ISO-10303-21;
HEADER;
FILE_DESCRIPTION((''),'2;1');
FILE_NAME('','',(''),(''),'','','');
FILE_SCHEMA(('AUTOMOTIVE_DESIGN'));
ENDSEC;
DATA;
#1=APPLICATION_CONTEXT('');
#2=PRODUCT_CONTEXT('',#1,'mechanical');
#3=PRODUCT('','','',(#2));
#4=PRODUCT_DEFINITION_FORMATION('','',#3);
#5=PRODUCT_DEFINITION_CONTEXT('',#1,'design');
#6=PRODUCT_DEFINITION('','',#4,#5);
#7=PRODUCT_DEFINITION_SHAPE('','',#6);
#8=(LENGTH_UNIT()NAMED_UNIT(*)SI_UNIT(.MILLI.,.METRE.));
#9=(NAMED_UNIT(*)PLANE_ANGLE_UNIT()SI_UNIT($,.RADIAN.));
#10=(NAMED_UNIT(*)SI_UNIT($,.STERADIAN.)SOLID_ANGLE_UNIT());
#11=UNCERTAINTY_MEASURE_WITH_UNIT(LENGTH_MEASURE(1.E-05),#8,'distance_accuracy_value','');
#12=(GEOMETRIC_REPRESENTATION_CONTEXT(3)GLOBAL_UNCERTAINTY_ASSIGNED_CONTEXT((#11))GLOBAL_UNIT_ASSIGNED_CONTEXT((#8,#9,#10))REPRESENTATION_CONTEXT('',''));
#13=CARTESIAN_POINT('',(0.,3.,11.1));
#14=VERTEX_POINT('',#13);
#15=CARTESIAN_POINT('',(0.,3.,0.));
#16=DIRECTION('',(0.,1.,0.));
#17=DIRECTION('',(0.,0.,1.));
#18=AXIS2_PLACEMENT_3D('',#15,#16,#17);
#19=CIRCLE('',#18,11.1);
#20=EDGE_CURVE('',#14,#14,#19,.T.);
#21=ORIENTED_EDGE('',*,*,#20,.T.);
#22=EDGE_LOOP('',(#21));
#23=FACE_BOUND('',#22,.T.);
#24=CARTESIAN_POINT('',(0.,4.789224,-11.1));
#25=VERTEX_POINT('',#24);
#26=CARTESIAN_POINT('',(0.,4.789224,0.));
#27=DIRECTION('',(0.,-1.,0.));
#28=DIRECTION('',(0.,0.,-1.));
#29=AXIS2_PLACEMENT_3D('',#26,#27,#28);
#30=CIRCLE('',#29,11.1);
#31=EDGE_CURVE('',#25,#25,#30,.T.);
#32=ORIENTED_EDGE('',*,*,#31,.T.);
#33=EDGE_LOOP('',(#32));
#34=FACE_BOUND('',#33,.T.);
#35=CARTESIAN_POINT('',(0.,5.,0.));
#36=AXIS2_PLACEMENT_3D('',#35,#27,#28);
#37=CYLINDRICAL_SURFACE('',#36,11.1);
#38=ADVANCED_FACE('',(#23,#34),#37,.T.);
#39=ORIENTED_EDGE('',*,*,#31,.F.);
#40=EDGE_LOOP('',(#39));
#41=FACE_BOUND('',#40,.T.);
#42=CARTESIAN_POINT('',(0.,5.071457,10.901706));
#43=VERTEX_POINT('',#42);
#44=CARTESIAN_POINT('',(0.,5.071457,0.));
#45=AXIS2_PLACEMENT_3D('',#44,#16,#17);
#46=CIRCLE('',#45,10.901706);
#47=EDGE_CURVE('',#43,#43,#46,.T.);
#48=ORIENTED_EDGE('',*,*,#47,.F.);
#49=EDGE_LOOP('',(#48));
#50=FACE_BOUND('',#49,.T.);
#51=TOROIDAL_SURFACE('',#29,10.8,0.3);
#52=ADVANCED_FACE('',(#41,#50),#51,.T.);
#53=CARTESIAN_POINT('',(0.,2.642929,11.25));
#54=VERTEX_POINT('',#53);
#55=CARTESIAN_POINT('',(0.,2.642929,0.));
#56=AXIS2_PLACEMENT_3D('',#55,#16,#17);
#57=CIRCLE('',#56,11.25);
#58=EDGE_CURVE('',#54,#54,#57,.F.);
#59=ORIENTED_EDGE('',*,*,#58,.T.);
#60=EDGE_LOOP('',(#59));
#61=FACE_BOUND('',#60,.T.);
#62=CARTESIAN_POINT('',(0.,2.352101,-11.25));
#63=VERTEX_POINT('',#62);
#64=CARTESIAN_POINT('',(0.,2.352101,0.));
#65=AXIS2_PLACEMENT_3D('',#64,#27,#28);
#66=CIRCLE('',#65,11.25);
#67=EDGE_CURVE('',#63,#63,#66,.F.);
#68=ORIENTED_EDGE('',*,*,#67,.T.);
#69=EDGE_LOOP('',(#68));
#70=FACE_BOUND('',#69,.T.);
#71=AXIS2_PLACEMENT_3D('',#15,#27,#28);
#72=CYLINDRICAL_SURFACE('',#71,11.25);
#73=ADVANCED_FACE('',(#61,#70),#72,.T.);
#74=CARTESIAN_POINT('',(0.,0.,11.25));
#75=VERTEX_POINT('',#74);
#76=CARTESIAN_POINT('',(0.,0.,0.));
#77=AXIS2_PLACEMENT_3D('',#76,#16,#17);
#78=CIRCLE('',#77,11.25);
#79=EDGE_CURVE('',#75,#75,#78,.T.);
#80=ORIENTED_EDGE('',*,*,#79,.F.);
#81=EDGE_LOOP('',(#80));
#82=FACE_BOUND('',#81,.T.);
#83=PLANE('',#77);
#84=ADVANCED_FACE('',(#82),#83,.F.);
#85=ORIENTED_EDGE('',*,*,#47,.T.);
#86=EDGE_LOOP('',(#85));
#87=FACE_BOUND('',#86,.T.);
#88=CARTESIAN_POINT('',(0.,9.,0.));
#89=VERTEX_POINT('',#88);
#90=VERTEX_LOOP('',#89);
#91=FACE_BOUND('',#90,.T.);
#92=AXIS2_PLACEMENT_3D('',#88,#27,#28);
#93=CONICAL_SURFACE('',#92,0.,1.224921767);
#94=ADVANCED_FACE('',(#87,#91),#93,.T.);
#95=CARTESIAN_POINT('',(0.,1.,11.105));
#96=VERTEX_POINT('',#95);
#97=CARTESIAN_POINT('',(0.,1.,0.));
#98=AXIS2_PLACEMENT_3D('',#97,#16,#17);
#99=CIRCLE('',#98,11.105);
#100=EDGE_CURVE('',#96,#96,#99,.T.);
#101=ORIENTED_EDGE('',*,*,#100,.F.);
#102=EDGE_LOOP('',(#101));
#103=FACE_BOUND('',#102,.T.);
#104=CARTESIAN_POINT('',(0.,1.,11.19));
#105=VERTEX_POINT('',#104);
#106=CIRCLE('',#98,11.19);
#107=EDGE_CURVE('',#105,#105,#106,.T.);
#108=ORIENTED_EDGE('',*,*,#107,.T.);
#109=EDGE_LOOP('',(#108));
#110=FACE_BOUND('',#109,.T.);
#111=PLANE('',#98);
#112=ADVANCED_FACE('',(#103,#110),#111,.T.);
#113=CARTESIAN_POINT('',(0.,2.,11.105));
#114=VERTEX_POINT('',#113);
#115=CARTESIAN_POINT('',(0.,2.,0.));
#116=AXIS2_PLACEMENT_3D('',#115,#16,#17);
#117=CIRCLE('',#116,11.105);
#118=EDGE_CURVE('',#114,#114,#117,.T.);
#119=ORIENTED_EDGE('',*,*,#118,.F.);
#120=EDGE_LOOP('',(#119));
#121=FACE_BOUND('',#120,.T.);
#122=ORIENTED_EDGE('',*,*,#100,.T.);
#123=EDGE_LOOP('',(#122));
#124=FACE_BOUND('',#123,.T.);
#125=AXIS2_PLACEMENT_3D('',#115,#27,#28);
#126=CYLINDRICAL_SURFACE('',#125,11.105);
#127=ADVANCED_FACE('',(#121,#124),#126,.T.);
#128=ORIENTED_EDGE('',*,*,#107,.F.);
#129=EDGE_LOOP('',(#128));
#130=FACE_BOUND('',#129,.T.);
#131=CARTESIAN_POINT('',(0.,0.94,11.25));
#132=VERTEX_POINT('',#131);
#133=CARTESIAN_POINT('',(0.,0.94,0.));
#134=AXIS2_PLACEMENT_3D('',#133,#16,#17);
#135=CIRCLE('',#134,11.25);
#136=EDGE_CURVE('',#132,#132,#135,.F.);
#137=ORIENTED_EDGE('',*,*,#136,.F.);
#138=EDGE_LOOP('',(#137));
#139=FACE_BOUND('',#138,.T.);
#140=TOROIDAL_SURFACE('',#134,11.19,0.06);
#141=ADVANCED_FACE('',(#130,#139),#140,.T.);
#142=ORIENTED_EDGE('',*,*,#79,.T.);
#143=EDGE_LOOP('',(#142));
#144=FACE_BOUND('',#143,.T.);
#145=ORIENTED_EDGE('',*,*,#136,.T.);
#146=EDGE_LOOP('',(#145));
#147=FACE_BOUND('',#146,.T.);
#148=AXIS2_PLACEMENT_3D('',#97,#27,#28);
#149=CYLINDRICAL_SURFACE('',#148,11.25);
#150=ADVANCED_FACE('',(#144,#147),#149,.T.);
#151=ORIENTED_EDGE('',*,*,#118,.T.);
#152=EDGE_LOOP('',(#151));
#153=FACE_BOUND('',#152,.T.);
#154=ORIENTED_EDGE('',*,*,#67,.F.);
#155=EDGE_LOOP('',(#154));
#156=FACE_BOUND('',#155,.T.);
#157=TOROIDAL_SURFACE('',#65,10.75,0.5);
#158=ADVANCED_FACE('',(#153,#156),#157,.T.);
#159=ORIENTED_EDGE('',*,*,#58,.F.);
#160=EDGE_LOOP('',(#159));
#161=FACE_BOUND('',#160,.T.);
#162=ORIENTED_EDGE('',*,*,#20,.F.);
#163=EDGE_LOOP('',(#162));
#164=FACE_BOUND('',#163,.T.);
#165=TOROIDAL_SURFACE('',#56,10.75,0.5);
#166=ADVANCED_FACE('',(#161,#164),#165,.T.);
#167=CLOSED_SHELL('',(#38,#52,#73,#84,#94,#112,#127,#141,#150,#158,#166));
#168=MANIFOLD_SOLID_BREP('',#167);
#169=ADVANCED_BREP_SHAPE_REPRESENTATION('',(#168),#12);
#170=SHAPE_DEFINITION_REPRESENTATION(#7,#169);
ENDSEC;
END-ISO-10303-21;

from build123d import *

# Parameters (mm, degrees)
SKETCH1_R           = 11.25
BOSS_EXTRUDE1_DEPTH = 1
SKETCH2_R           = 11.105
BOSS_EXTRUDE2_DEPTH = 1
SKETCH3_R           = 11.25
BOSS_EXTRUDE3_DEPTH = 1
SKETCH4_R           = 11.1
BOSS_EXTRUDE4_DEPTH = 2
FILLET1_R           = 0.3
FILLET3_R           = 0.5
FILLET4_R           = 0.06


with BuildPart() as part:
    # Sketch1 → Boss-Extrude1 (new body)
    with BuildSketch(Plane(origin=(0, 0, 0), x_dir=(1, 0, 0), z_dir=(0, 1, 0))):
        with Locations(Location((0, 0, 0), (0, 0, 270))):
            Circle(SKETCH1_R)
    extrude(amount=BOSS_EXTRUDE1_DEPTH)

    # Sketch2 → Boss-Extrude2 (add)
    with BuildSketch(Plane(origin=(0, 1, 0), x_dir=(1, 0, 0), z_dir=(0, 1, 0))):
        with Locations(Location((0, 0, 0), (0, 0, 270))):
            Circle(SKETCH2_R)
    extrude(amount=BOSS_EXTRUDE2_DEPTH)

    # Sketch3 → Boss-Extrude3 (add)
    with BuildSketch(Plane(origin=(0, 2, 0), x_dir=(1, 0, 0), z_dir=(0, 1, 0))):
        with Locations(Location((0, 0, 0), (0, 0, 270))):
            Circle(SKETCH3_R)
    extrude(amount=BOSS_EXTRUDE3_DEPTH)

    # Sketch4 → Boss-Extrude4 (add)
    with BuildSketch(Plane(origin=(0, 3, 0), x_dir=(1, 0, 0), z_dir=(0, 1, 0))):
        with Locations(Location((0, 0, 0), (0, 0, 270))):
            Circle(SKETCH4_R)
    extrude(amount=BOSS_EXTRUDE4_DEPTH)

    # Sketch6 → Revolve1 (revolve)
    with BuildSketch(Plane(origin=(0, 0, 0), x_dir=(0.06000839273320703, 0, 0.9981978725691502), z_dir=(-0.9981978725691503, 0, 0.06000839273320704)), mode=Mode.PRIVATE) as revolve1_sk:
        Polygon((11.1, 5), (0, 5), (0, 9), align=None)
    revolve(revolve1_sk.sketch.rotate(Axis((0, 5, 0), (0, 1, 0)), 176.559705496), axis=Axis((0, 5, 0), (0, 1, 0)))

    # Fillet1
    fillet1_edges = [part.edges().sort_by_distance(p)[0] for p in [
        (-11.1, 5, 0),
    ]]
    fillet(fillet1_edges, radius=FILLET1_R)

    # Fillet3
    # the kernel refuses this fillet: 0.5 mm, written as the material it takes off along each edge
    with BuildSketch(Plane(origin=(0, 3, 0), x_dir=(0, 0, 1), z_dir=(-1, 0, 0))) as fillet3_piece_1:
        with BuildLine():
            CenterArc((10.75, -0.357071421), FILLET3_R, 0, 45.572995999)
            Line((11.25, -0.357071421), (11.26, -0.357071421))
            Line((11.26, -0.357071421), (11.26, 0))
            Line((11.26, 0), (11.25, 0.01))
            ThreePointArc((11.25, 0.01), (11.175, 0.01), (11.107, 0.007141428))
            Line((11.107, 0.007141428), (11.1, 0))
        make_face()
    revolve(axis=Axis((0, 3, 0), (0, 1, 0)), mode=Mode.SUBTRACT)
    with BuildSketch(Plane(origin=(0, 2, 0), x_dir=(0, 0, 1), z_dir=(-1, 0, 0))) as fillet3_piece_2:
        with BuildLine():
            CenterArc((10.75, 0.352100838), FILLET3_R, 315.234915329, 44.765084671)
            Line((11.105, 0), (11.1121, -0.007042017))
            ThreePointArc((11.1121, -0.007042017), (11.1775, -0.01), (11.25, -0.01))
            Line((11.25, -0.01), (11.26, 0))
            Line((11.26, 0), (11.26, 0.352100838))
            Line((11.26, 0.352100838), (11.25, 0.352100838))
        make_face()
    revolve(axis=Axis((0, 2, 0), (0, 1, 0)), mode=Mode.SUBTRACT)

    # Fillet4
    fillet4_edges = [part.edges().sort_by_distance(p)[0] for p in [
        (0, 1, -11.25),
    ]]
    fillet(fillet4_edges, radius=FILLET4_R)


solid = part.part
